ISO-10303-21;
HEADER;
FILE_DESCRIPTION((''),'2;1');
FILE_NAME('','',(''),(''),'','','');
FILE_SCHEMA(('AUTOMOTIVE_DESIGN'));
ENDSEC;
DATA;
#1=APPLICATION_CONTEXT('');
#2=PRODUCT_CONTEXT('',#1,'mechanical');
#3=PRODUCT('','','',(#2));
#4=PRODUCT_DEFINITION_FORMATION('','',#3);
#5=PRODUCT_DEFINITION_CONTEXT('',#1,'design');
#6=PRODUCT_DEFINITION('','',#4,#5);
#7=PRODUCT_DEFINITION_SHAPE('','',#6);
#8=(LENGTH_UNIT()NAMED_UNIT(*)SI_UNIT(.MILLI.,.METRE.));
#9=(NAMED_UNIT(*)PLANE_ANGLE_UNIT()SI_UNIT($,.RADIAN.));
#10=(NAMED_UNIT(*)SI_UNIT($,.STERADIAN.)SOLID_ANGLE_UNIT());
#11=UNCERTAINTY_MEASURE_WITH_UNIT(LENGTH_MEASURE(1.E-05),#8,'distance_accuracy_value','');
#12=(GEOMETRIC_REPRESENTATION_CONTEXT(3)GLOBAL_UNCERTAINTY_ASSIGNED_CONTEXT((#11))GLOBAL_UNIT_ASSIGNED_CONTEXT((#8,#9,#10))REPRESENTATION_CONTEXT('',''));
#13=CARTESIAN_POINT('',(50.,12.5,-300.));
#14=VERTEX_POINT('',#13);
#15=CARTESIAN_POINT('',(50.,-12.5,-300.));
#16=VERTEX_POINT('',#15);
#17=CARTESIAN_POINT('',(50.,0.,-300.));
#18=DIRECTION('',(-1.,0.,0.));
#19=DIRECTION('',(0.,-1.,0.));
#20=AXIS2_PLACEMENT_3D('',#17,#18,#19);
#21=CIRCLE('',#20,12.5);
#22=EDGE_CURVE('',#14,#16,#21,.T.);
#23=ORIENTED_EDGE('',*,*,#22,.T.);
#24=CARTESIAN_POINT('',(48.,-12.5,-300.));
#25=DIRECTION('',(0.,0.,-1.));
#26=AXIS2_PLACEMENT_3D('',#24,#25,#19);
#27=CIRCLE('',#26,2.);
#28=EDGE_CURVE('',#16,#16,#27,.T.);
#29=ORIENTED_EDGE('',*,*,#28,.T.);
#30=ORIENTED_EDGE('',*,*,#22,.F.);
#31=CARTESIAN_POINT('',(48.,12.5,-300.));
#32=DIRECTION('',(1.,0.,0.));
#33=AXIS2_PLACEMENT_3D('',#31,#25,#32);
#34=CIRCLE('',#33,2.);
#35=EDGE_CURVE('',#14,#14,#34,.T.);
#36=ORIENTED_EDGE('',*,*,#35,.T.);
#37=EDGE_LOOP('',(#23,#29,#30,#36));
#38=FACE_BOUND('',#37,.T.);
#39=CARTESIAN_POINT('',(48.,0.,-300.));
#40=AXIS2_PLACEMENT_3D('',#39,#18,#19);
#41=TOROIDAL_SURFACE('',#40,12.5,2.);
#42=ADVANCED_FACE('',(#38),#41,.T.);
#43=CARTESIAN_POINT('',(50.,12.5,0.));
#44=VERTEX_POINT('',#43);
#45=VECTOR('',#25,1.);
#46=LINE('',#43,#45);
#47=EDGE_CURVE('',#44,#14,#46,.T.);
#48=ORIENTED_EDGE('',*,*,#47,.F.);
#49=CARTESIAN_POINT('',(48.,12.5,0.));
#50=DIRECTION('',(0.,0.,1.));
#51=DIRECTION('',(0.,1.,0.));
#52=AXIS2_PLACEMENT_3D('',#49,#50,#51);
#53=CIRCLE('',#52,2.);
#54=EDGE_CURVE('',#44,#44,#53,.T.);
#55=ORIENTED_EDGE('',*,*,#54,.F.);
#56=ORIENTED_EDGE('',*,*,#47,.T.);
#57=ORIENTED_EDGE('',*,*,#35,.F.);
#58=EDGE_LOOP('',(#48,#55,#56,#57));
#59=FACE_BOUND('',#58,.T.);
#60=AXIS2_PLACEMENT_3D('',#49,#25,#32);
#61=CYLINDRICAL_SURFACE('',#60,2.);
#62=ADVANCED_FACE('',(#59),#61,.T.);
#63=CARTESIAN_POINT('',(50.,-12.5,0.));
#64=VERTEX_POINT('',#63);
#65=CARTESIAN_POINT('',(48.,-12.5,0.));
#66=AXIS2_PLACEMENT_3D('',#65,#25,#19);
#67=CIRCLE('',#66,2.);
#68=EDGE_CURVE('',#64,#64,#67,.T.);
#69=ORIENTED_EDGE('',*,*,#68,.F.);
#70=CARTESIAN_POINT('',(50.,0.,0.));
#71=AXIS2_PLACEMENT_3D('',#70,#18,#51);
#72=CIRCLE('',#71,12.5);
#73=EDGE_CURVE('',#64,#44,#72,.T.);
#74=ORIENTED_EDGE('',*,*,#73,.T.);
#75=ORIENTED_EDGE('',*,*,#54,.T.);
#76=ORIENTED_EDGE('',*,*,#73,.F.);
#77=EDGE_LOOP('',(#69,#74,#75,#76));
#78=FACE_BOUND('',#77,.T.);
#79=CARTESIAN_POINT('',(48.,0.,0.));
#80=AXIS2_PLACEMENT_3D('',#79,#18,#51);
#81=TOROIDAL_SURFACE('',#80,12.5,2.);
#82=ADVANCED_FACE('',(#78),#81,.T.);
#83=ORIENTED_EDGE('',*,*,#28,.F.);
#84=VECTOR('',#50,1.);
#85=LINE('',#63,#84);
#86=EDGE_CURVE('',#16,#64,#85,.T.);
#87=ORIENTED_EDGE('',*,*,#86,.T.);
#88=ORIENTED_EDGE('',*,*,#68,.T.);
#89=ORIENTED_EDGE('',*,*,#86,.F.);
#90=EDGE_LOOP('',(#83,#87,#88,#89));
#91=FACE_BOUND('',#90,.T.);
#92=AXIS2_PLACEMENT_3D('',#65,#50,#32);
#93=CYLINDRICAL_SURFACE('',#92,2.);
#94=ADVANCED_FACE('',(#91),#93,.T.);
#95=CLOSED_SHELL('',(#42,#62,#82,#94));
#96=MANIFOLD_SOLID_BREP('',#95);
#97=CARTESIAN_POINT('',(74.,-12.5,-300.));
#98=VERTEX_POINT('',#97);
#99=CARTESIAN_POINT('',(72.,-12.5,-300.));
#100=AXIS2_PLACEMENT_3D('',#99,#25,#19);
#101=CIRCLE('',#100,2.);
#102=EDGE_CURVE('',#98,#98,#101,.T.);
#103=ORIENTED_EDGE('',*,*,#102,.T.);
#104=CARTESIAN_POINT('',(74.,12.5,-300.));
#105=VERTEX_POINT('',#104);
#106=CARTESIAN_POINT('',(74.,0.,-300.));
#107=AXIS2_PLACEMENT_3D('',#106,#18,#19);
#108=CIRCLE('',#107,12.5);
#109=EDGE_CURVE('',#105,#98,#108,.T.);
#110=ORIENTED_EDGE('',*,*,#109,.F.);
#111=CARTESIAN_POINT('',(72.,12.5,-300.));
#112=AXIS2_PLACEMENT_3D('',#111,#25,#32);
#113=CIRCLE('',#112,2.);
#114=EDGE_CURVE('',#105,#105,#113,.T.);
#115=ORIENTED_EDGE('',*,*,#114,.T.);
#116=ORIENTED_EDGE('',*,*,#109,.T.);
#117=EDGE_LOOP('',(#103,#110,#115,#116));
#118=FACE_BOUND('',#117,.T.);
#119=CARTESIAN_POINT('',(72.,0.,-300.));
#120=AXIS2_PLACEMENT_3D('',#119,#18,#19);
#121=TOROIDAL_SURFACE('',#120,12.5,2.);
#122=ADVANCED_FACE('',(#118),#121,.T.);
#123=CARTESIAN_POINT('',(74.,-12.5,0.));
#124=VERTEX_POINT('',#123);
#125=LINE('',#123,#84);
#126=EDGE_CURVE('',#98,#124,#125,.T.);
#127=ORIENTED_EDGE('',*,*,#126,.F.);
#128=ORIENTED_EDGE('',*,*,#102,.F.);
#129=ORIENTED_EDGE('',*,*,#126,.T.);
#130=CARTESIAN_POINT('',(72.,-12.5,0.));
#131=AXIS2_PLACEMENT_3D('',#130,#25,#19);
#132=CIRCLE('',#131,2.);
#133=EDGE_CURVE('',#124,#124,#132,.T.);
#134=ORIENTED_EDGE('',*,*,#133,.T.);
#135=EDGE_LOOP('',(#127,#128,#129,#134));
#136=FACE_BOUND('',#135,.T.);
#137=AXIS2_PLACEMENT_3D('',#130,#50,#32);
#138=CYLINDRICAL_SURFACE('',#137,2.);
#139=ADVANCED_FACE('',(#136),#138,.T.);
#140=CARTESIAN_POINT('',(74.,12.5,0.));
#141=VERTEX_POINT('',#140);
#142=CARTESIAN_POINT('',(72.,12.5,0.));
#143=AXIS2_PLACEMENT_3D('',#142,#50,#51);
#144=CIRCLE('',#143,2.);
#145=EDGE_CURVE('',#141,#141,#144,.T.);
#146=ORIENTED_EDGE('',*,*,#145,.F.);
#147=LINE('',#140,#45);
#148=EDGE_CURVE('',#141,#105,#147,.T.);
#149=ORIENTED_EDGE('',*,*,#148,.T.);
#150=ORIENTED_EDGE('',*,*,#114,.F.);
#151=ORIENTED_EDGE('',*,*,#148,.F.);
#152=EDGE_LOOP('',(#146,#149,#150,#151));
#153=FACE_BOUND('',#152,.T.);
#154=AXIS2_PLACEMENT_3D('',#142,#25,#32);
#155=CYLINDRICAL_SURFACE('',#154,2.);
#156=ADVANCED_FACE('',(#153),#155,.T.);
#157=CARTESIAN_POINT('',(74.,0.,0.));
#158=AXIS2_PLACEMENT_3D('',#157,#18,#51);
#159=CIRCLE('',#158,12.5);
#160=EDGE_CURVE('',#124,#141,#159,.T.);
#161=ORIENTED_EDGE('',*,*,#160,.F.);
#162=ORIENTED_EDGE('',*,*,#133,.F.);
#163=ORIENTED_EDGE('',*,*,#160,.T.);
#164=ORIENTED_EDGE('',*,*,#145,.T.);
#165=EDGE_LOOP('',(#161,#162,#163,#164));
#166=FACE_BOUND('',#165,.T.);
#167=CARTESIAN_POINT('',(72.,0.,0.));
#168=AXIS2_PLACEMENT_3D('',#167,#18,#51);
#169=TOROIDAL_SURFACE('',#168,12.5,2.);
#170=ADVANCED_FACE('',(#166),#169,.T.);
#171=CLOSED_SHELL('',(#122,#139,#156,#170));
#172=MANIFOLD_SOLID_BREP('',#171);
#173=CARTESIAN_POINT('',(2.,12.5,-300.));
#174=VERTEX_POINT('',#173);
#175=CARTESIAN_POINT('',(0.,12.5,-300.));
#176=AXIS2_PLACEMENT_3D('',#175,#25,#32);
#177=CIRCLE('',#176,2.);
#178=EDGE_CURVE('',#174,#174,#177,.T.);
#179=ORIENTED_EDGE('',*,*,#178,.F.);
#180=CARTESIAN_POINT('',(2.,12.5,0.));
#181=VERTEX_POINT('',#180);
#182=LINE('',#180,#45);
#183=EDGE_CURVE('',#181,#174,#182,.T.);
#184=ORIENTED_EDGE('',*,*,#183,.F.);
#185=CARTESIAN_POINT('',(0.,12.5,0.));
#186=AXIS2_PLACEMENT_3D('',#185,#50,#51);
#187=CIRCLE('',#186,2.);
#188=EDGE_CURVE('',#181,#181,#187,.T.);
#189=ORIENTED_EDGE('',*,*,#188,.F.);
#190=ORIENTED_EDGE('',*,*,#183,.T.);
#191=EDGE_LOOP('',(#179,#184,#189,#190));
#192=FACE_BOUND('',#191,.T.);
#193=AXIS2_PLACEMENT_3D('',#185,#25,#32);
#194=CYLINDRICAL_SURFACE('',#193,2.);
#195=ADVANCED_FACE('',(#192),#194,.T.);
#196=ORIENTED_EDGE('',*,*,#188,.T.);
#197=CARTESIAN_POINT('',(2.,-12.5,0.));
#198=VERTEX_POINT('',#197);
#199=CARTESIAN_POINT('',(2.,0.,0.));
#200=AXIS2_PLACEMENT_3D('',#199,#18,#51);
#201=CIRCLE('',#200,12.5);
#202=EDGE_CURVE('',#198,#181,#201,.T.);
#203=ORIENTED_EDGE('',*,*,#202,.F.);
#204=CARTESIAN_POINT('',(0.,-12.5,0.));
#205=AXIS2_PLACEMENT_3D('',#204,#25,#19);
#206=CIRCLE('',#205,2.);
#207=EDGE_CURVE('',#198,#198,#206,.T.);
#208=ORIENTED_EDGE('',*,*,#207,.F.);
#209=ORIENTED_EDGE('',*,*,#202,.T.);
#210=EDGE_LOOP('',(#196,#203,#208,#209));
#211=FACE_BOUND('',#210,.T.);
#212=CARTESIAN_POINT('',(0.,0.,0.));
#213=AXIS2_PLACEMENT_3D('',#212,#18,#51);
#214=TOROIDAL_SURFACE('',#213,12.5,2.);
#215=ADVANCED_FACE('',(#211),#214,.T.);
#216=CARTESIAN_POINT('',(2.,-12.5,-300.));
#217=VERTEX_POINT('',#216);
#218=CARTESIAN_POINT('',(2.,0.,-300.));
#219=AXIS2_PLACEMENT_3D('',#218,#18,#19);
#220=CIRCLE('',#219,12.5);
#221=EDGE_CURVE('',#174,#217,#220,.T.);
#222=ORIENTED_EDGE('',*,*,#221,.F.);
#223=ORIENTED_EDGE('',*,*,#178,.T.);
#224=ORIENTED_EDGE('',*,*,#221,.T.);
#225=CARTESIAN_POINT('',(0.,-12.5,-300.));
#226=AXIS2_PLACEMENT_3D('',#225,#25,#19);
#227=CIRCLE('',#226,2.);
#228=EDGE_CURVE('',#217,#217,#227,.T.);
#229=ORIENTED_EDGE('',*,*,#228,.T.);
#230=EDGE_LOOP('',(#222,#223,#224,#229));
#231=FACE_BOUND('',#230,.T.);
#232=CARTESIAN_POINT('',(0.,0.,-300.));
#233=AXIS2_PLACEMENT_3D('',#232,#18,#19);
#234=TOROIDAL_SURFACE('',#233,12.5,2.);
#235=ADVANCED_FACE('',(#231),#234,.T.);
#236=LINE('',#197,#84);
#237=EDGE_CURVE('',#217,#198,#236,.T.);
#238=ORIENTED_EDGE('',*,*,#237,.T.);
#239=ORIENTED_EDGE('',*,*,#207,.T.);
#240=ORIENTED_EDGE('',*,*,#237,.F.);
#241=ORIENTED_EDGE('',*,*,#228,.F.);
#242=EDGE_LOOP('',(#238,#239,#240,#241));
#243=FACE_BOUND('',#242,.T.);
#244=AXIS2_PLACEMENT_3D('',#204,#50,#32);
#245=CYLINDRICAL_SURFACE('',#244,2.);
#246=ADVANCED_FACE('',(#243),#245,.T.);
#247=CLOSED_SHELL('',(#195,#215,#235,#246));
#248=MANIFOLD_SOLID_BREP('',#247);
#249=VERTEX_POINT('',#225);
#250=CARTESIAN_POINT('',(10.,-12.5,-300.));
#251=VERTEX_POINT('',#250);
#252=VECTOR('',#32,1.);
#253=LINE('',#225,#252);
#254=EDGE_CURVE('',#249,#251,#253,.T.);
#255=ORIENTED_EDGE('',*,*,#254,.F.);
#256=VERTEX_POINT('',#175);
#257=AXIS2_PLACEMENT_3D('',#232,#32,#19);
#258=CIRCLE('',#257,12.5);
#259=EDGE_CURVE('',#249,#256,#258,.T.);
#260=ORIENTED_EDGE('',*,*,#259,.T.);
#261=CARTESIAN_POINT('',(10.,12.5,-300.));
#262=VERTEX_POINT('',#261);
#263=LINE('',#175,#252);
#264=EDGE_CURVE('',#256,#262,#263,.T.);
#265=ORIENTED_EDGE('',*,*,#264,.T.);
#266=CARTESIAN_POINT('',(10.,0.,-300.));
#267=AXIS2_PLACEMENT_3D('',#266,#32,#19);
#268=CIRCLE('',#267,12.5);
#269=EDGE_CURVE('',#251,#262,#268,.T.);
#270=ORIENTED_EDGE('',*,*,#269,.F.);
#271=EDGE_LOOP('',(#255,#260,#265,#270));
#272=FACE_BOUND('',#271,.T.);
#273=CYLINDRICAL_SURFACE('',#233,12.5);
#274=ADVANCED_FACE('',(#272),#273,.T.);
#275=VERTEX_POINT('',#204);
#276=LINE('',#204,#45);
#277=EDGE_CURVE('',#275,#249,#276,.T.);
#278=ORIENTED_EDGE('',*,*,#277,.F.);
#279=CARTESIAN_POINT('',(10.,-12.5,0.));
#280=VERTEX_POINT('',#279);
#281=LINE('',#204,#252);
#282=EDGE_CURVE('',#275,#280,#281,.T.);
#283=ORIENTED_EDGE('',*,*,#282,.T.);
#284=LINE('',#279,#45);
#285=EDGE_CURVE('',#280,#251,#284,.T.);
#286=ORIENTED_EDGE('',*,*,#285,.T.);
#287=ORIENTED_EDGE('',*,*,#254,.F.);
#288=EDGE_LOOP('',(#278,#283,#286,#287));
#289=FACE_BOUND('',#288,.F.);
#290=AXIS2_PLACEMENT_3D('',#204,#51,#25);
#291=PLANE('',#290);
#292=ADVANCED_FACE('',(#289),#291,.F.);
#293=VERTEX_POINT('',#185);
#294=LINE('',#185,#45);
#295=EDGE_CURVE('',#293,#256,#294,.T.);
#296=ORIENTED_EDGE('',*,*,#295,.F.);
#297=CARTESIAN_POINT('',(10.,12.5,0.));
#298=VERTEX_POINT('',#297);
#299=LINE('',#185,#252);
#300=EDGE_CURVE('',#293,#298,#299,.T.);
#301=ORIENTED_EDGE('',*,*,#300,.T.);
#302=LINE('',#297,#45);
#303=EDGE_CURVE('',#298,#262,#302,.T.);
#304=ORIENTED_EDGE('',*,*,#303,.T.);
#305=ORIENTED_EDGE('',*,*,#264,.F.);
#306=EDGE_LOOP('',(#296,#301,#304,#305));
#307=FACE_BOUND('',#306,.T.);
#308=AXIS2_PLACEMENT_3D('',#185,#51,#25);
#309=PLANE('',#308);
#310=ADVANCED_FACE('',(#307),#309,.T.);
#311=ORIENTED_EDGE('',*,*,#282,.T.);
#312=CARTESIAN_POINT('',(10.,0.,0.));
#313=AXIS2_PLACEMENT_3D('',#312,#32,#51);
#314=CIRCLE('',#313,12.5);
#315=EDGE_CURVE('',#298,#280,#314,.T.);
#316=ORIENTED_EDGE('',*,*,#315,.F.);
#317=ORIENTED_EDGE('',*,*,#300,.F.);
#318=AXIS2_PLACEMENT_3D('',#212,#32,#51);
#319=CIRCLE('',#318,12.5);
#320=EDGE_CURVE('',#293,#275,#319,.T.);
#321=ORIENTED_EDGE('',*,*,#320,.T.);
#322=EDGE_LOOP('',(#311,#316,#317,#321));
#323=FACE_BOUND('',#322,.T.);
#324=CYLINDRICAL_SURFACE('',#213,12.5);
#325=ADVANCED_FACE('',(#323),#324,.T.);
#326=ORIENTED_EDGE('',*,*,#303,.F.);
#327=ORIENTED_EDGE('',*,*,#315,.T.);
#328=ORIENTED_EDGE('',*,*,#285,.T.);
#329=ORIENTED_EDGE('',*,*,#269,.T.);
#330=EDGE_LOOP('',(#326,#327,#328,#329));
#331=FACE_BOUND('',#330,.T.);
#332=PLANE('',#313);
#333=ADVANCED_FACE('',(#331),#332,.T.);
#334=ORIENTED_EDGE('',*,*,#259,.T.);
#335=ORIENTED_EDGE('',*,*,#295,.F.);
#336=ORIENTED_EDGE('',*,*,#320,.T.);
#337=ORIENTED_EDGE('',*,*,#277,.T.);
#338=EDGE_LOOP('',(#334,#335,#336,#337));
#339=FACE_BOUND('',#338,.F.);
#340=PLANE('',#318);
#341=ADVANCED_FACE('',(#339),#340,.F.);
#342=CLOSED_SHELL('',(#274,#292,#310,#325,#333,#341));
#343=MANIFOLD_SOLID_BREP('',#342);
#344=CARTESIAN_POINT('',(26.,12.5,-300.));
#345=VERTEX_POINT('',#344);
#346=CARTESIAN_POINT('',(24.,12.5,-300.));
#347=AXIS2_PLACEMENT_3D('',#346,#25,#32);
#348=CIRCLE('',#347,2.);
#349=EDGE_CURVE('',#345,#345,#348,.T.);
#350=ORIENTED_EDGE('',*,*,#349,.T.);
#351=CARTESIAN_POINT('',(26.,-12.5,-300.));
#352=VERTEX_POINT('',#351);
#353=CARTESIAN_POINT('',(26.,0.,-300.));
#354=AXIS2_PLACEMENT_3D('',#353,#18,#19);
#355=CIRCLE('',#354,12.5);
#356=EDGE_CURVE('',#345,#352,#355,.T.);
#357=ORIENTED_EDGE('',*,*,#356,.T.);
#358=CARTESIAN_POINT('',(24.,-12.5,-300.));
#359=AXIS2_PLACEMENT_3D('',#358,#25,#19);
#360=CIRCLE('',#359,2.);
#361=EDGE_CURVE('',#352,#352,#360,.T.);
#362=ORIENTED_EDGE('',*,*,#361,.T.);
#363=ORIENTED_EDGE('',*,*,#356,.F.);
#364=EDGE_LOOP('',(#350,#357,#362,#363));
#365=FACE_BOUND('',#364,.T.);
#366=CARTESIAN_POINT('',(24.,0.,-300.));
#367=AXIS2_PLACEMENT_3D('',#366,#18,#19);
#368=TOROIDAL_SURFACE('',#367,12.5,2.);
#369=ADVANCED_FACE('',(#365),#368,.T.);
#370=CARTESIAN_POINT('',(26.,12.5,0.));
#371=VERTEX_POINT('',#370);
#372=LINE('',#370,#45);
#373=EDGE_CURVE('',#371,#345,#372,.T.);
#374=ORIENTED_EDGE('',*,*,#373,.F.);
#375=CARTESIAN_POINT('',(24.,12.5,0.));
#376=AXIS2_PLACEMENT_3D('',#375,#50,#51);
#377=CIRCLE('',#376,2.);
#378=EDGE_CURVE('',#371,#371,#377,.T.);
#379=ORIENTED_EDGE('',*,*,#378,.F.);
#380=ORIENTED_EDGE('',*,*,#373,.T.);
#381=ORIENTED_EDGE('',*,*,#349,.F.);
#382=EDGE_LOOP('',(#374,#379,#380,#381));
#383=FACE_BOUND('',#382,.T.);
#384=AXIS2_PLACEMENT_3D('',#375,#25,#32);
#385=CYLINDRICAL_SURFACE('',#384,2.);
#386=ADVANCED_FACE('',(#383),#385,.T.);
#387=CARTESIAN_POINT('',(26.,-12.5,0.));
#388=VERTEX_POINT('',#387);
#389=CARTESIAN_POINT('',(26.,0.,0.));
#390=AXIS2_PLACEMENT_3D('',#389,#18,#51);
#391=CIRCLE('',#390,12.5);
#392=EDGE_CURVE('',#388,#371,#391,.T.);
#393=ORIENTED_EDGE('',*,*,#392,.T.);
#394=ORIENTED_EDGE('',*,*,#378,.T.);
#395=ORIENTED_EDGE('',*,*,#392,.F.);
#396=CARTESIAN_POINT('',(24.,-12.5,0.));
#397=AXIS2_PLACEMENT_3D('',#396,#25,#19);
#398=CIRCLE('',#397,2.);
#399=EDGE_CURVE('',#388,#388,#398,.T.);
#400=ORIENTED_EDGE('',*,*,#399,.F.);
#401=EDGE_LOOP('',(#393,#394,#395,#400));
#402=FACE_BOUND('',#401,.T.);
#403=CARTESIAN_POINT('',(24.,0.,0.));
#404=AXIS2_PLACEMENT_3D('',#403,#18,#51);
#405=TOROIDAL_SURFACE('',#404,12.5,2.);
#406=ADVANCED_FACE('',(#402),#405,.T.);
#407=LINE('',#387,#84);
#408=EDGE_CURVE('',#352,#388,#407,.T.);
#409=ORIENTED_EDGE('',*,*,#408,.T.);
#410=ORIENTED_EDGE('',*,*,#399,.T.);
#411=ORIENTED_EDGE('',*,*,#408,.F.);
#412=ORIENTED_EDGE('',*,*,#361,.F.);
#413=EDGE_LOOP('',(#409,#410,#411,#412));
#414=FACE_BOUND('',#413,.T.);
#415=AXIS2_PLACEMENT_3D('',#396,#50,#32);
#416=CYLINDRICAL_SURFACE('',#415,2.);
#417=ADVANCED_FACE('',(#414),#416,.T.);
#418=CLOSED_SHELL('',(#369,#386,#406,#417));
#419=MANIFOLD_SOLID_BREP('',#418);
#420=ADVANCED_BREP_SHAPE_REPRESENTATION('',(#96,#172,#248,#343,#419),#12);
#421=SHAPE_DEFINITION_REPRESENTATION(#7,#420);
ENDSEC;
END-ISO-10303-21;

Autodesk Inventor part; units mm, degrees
ref_plane "XZ Plane" through (0, 0, 0) normal (0, 1, 0) x (-1, 0, 0)
ref_plane "XY Plane" through (0, 0, 0) normal (0, 0, 1) x (1, 0, 0)
sketch "スケッチ1" plane through (0, 0, 0) normal (1, 0, 0) x (0, 1, 0)
  line L0 (12.5, 0) -> (12.5, -300)
  line L1 (-12.5, 0) -> (-12.5, -300)
  arc A0 (12.5, 0) -> (-12.5, 0) centre (0, 0) ccw
  arc A1 (-12.5, -300) -> (12.5, -300) centre (0, -300) ccw
  circle A2 centre (0, 0) radius 10.5
  circle A3 centre (0, -300) radius 10.5
  point P0 (10.5, -300)
  point P1 (-10.5, -300)
  point P2 (-10.5, 0)
  point P3 (10.5, 0)
  dimension "d7" = 12.5
  dimension "d8" = 12.5
  dimension "d14" = 21
  dimension "d15" = 21
  dimension "d18" = 300
  dimension "d19" = 0
sketch "スケッチ2" plane through (0, 0, 0) normal (0, 0, 1) x (1, 0, 0)
  circle A0 centre (0, 12.5) radius 2
  point P0 (0, 0)
  dimension "d4" = 4
  dimension "d5" = 12.5
  dimension "d6" = 0
sweep "スイープ1" add profiles "スケッチ2" path "スケッチ1" path curves L0 A1 L1 A0
pattern_linear "矩形状パターン1" count 4 spacing 24 along (1, 0, 0)
extrude "押し出し1" add sketch "スケッチ1" along normal blind 10 separate body contours L0 A1 L1 A0 | A2 | A3
equation "\"d8\" = d7"
properties part number "ball_loading_v1_circle_B" material "ゴム"
